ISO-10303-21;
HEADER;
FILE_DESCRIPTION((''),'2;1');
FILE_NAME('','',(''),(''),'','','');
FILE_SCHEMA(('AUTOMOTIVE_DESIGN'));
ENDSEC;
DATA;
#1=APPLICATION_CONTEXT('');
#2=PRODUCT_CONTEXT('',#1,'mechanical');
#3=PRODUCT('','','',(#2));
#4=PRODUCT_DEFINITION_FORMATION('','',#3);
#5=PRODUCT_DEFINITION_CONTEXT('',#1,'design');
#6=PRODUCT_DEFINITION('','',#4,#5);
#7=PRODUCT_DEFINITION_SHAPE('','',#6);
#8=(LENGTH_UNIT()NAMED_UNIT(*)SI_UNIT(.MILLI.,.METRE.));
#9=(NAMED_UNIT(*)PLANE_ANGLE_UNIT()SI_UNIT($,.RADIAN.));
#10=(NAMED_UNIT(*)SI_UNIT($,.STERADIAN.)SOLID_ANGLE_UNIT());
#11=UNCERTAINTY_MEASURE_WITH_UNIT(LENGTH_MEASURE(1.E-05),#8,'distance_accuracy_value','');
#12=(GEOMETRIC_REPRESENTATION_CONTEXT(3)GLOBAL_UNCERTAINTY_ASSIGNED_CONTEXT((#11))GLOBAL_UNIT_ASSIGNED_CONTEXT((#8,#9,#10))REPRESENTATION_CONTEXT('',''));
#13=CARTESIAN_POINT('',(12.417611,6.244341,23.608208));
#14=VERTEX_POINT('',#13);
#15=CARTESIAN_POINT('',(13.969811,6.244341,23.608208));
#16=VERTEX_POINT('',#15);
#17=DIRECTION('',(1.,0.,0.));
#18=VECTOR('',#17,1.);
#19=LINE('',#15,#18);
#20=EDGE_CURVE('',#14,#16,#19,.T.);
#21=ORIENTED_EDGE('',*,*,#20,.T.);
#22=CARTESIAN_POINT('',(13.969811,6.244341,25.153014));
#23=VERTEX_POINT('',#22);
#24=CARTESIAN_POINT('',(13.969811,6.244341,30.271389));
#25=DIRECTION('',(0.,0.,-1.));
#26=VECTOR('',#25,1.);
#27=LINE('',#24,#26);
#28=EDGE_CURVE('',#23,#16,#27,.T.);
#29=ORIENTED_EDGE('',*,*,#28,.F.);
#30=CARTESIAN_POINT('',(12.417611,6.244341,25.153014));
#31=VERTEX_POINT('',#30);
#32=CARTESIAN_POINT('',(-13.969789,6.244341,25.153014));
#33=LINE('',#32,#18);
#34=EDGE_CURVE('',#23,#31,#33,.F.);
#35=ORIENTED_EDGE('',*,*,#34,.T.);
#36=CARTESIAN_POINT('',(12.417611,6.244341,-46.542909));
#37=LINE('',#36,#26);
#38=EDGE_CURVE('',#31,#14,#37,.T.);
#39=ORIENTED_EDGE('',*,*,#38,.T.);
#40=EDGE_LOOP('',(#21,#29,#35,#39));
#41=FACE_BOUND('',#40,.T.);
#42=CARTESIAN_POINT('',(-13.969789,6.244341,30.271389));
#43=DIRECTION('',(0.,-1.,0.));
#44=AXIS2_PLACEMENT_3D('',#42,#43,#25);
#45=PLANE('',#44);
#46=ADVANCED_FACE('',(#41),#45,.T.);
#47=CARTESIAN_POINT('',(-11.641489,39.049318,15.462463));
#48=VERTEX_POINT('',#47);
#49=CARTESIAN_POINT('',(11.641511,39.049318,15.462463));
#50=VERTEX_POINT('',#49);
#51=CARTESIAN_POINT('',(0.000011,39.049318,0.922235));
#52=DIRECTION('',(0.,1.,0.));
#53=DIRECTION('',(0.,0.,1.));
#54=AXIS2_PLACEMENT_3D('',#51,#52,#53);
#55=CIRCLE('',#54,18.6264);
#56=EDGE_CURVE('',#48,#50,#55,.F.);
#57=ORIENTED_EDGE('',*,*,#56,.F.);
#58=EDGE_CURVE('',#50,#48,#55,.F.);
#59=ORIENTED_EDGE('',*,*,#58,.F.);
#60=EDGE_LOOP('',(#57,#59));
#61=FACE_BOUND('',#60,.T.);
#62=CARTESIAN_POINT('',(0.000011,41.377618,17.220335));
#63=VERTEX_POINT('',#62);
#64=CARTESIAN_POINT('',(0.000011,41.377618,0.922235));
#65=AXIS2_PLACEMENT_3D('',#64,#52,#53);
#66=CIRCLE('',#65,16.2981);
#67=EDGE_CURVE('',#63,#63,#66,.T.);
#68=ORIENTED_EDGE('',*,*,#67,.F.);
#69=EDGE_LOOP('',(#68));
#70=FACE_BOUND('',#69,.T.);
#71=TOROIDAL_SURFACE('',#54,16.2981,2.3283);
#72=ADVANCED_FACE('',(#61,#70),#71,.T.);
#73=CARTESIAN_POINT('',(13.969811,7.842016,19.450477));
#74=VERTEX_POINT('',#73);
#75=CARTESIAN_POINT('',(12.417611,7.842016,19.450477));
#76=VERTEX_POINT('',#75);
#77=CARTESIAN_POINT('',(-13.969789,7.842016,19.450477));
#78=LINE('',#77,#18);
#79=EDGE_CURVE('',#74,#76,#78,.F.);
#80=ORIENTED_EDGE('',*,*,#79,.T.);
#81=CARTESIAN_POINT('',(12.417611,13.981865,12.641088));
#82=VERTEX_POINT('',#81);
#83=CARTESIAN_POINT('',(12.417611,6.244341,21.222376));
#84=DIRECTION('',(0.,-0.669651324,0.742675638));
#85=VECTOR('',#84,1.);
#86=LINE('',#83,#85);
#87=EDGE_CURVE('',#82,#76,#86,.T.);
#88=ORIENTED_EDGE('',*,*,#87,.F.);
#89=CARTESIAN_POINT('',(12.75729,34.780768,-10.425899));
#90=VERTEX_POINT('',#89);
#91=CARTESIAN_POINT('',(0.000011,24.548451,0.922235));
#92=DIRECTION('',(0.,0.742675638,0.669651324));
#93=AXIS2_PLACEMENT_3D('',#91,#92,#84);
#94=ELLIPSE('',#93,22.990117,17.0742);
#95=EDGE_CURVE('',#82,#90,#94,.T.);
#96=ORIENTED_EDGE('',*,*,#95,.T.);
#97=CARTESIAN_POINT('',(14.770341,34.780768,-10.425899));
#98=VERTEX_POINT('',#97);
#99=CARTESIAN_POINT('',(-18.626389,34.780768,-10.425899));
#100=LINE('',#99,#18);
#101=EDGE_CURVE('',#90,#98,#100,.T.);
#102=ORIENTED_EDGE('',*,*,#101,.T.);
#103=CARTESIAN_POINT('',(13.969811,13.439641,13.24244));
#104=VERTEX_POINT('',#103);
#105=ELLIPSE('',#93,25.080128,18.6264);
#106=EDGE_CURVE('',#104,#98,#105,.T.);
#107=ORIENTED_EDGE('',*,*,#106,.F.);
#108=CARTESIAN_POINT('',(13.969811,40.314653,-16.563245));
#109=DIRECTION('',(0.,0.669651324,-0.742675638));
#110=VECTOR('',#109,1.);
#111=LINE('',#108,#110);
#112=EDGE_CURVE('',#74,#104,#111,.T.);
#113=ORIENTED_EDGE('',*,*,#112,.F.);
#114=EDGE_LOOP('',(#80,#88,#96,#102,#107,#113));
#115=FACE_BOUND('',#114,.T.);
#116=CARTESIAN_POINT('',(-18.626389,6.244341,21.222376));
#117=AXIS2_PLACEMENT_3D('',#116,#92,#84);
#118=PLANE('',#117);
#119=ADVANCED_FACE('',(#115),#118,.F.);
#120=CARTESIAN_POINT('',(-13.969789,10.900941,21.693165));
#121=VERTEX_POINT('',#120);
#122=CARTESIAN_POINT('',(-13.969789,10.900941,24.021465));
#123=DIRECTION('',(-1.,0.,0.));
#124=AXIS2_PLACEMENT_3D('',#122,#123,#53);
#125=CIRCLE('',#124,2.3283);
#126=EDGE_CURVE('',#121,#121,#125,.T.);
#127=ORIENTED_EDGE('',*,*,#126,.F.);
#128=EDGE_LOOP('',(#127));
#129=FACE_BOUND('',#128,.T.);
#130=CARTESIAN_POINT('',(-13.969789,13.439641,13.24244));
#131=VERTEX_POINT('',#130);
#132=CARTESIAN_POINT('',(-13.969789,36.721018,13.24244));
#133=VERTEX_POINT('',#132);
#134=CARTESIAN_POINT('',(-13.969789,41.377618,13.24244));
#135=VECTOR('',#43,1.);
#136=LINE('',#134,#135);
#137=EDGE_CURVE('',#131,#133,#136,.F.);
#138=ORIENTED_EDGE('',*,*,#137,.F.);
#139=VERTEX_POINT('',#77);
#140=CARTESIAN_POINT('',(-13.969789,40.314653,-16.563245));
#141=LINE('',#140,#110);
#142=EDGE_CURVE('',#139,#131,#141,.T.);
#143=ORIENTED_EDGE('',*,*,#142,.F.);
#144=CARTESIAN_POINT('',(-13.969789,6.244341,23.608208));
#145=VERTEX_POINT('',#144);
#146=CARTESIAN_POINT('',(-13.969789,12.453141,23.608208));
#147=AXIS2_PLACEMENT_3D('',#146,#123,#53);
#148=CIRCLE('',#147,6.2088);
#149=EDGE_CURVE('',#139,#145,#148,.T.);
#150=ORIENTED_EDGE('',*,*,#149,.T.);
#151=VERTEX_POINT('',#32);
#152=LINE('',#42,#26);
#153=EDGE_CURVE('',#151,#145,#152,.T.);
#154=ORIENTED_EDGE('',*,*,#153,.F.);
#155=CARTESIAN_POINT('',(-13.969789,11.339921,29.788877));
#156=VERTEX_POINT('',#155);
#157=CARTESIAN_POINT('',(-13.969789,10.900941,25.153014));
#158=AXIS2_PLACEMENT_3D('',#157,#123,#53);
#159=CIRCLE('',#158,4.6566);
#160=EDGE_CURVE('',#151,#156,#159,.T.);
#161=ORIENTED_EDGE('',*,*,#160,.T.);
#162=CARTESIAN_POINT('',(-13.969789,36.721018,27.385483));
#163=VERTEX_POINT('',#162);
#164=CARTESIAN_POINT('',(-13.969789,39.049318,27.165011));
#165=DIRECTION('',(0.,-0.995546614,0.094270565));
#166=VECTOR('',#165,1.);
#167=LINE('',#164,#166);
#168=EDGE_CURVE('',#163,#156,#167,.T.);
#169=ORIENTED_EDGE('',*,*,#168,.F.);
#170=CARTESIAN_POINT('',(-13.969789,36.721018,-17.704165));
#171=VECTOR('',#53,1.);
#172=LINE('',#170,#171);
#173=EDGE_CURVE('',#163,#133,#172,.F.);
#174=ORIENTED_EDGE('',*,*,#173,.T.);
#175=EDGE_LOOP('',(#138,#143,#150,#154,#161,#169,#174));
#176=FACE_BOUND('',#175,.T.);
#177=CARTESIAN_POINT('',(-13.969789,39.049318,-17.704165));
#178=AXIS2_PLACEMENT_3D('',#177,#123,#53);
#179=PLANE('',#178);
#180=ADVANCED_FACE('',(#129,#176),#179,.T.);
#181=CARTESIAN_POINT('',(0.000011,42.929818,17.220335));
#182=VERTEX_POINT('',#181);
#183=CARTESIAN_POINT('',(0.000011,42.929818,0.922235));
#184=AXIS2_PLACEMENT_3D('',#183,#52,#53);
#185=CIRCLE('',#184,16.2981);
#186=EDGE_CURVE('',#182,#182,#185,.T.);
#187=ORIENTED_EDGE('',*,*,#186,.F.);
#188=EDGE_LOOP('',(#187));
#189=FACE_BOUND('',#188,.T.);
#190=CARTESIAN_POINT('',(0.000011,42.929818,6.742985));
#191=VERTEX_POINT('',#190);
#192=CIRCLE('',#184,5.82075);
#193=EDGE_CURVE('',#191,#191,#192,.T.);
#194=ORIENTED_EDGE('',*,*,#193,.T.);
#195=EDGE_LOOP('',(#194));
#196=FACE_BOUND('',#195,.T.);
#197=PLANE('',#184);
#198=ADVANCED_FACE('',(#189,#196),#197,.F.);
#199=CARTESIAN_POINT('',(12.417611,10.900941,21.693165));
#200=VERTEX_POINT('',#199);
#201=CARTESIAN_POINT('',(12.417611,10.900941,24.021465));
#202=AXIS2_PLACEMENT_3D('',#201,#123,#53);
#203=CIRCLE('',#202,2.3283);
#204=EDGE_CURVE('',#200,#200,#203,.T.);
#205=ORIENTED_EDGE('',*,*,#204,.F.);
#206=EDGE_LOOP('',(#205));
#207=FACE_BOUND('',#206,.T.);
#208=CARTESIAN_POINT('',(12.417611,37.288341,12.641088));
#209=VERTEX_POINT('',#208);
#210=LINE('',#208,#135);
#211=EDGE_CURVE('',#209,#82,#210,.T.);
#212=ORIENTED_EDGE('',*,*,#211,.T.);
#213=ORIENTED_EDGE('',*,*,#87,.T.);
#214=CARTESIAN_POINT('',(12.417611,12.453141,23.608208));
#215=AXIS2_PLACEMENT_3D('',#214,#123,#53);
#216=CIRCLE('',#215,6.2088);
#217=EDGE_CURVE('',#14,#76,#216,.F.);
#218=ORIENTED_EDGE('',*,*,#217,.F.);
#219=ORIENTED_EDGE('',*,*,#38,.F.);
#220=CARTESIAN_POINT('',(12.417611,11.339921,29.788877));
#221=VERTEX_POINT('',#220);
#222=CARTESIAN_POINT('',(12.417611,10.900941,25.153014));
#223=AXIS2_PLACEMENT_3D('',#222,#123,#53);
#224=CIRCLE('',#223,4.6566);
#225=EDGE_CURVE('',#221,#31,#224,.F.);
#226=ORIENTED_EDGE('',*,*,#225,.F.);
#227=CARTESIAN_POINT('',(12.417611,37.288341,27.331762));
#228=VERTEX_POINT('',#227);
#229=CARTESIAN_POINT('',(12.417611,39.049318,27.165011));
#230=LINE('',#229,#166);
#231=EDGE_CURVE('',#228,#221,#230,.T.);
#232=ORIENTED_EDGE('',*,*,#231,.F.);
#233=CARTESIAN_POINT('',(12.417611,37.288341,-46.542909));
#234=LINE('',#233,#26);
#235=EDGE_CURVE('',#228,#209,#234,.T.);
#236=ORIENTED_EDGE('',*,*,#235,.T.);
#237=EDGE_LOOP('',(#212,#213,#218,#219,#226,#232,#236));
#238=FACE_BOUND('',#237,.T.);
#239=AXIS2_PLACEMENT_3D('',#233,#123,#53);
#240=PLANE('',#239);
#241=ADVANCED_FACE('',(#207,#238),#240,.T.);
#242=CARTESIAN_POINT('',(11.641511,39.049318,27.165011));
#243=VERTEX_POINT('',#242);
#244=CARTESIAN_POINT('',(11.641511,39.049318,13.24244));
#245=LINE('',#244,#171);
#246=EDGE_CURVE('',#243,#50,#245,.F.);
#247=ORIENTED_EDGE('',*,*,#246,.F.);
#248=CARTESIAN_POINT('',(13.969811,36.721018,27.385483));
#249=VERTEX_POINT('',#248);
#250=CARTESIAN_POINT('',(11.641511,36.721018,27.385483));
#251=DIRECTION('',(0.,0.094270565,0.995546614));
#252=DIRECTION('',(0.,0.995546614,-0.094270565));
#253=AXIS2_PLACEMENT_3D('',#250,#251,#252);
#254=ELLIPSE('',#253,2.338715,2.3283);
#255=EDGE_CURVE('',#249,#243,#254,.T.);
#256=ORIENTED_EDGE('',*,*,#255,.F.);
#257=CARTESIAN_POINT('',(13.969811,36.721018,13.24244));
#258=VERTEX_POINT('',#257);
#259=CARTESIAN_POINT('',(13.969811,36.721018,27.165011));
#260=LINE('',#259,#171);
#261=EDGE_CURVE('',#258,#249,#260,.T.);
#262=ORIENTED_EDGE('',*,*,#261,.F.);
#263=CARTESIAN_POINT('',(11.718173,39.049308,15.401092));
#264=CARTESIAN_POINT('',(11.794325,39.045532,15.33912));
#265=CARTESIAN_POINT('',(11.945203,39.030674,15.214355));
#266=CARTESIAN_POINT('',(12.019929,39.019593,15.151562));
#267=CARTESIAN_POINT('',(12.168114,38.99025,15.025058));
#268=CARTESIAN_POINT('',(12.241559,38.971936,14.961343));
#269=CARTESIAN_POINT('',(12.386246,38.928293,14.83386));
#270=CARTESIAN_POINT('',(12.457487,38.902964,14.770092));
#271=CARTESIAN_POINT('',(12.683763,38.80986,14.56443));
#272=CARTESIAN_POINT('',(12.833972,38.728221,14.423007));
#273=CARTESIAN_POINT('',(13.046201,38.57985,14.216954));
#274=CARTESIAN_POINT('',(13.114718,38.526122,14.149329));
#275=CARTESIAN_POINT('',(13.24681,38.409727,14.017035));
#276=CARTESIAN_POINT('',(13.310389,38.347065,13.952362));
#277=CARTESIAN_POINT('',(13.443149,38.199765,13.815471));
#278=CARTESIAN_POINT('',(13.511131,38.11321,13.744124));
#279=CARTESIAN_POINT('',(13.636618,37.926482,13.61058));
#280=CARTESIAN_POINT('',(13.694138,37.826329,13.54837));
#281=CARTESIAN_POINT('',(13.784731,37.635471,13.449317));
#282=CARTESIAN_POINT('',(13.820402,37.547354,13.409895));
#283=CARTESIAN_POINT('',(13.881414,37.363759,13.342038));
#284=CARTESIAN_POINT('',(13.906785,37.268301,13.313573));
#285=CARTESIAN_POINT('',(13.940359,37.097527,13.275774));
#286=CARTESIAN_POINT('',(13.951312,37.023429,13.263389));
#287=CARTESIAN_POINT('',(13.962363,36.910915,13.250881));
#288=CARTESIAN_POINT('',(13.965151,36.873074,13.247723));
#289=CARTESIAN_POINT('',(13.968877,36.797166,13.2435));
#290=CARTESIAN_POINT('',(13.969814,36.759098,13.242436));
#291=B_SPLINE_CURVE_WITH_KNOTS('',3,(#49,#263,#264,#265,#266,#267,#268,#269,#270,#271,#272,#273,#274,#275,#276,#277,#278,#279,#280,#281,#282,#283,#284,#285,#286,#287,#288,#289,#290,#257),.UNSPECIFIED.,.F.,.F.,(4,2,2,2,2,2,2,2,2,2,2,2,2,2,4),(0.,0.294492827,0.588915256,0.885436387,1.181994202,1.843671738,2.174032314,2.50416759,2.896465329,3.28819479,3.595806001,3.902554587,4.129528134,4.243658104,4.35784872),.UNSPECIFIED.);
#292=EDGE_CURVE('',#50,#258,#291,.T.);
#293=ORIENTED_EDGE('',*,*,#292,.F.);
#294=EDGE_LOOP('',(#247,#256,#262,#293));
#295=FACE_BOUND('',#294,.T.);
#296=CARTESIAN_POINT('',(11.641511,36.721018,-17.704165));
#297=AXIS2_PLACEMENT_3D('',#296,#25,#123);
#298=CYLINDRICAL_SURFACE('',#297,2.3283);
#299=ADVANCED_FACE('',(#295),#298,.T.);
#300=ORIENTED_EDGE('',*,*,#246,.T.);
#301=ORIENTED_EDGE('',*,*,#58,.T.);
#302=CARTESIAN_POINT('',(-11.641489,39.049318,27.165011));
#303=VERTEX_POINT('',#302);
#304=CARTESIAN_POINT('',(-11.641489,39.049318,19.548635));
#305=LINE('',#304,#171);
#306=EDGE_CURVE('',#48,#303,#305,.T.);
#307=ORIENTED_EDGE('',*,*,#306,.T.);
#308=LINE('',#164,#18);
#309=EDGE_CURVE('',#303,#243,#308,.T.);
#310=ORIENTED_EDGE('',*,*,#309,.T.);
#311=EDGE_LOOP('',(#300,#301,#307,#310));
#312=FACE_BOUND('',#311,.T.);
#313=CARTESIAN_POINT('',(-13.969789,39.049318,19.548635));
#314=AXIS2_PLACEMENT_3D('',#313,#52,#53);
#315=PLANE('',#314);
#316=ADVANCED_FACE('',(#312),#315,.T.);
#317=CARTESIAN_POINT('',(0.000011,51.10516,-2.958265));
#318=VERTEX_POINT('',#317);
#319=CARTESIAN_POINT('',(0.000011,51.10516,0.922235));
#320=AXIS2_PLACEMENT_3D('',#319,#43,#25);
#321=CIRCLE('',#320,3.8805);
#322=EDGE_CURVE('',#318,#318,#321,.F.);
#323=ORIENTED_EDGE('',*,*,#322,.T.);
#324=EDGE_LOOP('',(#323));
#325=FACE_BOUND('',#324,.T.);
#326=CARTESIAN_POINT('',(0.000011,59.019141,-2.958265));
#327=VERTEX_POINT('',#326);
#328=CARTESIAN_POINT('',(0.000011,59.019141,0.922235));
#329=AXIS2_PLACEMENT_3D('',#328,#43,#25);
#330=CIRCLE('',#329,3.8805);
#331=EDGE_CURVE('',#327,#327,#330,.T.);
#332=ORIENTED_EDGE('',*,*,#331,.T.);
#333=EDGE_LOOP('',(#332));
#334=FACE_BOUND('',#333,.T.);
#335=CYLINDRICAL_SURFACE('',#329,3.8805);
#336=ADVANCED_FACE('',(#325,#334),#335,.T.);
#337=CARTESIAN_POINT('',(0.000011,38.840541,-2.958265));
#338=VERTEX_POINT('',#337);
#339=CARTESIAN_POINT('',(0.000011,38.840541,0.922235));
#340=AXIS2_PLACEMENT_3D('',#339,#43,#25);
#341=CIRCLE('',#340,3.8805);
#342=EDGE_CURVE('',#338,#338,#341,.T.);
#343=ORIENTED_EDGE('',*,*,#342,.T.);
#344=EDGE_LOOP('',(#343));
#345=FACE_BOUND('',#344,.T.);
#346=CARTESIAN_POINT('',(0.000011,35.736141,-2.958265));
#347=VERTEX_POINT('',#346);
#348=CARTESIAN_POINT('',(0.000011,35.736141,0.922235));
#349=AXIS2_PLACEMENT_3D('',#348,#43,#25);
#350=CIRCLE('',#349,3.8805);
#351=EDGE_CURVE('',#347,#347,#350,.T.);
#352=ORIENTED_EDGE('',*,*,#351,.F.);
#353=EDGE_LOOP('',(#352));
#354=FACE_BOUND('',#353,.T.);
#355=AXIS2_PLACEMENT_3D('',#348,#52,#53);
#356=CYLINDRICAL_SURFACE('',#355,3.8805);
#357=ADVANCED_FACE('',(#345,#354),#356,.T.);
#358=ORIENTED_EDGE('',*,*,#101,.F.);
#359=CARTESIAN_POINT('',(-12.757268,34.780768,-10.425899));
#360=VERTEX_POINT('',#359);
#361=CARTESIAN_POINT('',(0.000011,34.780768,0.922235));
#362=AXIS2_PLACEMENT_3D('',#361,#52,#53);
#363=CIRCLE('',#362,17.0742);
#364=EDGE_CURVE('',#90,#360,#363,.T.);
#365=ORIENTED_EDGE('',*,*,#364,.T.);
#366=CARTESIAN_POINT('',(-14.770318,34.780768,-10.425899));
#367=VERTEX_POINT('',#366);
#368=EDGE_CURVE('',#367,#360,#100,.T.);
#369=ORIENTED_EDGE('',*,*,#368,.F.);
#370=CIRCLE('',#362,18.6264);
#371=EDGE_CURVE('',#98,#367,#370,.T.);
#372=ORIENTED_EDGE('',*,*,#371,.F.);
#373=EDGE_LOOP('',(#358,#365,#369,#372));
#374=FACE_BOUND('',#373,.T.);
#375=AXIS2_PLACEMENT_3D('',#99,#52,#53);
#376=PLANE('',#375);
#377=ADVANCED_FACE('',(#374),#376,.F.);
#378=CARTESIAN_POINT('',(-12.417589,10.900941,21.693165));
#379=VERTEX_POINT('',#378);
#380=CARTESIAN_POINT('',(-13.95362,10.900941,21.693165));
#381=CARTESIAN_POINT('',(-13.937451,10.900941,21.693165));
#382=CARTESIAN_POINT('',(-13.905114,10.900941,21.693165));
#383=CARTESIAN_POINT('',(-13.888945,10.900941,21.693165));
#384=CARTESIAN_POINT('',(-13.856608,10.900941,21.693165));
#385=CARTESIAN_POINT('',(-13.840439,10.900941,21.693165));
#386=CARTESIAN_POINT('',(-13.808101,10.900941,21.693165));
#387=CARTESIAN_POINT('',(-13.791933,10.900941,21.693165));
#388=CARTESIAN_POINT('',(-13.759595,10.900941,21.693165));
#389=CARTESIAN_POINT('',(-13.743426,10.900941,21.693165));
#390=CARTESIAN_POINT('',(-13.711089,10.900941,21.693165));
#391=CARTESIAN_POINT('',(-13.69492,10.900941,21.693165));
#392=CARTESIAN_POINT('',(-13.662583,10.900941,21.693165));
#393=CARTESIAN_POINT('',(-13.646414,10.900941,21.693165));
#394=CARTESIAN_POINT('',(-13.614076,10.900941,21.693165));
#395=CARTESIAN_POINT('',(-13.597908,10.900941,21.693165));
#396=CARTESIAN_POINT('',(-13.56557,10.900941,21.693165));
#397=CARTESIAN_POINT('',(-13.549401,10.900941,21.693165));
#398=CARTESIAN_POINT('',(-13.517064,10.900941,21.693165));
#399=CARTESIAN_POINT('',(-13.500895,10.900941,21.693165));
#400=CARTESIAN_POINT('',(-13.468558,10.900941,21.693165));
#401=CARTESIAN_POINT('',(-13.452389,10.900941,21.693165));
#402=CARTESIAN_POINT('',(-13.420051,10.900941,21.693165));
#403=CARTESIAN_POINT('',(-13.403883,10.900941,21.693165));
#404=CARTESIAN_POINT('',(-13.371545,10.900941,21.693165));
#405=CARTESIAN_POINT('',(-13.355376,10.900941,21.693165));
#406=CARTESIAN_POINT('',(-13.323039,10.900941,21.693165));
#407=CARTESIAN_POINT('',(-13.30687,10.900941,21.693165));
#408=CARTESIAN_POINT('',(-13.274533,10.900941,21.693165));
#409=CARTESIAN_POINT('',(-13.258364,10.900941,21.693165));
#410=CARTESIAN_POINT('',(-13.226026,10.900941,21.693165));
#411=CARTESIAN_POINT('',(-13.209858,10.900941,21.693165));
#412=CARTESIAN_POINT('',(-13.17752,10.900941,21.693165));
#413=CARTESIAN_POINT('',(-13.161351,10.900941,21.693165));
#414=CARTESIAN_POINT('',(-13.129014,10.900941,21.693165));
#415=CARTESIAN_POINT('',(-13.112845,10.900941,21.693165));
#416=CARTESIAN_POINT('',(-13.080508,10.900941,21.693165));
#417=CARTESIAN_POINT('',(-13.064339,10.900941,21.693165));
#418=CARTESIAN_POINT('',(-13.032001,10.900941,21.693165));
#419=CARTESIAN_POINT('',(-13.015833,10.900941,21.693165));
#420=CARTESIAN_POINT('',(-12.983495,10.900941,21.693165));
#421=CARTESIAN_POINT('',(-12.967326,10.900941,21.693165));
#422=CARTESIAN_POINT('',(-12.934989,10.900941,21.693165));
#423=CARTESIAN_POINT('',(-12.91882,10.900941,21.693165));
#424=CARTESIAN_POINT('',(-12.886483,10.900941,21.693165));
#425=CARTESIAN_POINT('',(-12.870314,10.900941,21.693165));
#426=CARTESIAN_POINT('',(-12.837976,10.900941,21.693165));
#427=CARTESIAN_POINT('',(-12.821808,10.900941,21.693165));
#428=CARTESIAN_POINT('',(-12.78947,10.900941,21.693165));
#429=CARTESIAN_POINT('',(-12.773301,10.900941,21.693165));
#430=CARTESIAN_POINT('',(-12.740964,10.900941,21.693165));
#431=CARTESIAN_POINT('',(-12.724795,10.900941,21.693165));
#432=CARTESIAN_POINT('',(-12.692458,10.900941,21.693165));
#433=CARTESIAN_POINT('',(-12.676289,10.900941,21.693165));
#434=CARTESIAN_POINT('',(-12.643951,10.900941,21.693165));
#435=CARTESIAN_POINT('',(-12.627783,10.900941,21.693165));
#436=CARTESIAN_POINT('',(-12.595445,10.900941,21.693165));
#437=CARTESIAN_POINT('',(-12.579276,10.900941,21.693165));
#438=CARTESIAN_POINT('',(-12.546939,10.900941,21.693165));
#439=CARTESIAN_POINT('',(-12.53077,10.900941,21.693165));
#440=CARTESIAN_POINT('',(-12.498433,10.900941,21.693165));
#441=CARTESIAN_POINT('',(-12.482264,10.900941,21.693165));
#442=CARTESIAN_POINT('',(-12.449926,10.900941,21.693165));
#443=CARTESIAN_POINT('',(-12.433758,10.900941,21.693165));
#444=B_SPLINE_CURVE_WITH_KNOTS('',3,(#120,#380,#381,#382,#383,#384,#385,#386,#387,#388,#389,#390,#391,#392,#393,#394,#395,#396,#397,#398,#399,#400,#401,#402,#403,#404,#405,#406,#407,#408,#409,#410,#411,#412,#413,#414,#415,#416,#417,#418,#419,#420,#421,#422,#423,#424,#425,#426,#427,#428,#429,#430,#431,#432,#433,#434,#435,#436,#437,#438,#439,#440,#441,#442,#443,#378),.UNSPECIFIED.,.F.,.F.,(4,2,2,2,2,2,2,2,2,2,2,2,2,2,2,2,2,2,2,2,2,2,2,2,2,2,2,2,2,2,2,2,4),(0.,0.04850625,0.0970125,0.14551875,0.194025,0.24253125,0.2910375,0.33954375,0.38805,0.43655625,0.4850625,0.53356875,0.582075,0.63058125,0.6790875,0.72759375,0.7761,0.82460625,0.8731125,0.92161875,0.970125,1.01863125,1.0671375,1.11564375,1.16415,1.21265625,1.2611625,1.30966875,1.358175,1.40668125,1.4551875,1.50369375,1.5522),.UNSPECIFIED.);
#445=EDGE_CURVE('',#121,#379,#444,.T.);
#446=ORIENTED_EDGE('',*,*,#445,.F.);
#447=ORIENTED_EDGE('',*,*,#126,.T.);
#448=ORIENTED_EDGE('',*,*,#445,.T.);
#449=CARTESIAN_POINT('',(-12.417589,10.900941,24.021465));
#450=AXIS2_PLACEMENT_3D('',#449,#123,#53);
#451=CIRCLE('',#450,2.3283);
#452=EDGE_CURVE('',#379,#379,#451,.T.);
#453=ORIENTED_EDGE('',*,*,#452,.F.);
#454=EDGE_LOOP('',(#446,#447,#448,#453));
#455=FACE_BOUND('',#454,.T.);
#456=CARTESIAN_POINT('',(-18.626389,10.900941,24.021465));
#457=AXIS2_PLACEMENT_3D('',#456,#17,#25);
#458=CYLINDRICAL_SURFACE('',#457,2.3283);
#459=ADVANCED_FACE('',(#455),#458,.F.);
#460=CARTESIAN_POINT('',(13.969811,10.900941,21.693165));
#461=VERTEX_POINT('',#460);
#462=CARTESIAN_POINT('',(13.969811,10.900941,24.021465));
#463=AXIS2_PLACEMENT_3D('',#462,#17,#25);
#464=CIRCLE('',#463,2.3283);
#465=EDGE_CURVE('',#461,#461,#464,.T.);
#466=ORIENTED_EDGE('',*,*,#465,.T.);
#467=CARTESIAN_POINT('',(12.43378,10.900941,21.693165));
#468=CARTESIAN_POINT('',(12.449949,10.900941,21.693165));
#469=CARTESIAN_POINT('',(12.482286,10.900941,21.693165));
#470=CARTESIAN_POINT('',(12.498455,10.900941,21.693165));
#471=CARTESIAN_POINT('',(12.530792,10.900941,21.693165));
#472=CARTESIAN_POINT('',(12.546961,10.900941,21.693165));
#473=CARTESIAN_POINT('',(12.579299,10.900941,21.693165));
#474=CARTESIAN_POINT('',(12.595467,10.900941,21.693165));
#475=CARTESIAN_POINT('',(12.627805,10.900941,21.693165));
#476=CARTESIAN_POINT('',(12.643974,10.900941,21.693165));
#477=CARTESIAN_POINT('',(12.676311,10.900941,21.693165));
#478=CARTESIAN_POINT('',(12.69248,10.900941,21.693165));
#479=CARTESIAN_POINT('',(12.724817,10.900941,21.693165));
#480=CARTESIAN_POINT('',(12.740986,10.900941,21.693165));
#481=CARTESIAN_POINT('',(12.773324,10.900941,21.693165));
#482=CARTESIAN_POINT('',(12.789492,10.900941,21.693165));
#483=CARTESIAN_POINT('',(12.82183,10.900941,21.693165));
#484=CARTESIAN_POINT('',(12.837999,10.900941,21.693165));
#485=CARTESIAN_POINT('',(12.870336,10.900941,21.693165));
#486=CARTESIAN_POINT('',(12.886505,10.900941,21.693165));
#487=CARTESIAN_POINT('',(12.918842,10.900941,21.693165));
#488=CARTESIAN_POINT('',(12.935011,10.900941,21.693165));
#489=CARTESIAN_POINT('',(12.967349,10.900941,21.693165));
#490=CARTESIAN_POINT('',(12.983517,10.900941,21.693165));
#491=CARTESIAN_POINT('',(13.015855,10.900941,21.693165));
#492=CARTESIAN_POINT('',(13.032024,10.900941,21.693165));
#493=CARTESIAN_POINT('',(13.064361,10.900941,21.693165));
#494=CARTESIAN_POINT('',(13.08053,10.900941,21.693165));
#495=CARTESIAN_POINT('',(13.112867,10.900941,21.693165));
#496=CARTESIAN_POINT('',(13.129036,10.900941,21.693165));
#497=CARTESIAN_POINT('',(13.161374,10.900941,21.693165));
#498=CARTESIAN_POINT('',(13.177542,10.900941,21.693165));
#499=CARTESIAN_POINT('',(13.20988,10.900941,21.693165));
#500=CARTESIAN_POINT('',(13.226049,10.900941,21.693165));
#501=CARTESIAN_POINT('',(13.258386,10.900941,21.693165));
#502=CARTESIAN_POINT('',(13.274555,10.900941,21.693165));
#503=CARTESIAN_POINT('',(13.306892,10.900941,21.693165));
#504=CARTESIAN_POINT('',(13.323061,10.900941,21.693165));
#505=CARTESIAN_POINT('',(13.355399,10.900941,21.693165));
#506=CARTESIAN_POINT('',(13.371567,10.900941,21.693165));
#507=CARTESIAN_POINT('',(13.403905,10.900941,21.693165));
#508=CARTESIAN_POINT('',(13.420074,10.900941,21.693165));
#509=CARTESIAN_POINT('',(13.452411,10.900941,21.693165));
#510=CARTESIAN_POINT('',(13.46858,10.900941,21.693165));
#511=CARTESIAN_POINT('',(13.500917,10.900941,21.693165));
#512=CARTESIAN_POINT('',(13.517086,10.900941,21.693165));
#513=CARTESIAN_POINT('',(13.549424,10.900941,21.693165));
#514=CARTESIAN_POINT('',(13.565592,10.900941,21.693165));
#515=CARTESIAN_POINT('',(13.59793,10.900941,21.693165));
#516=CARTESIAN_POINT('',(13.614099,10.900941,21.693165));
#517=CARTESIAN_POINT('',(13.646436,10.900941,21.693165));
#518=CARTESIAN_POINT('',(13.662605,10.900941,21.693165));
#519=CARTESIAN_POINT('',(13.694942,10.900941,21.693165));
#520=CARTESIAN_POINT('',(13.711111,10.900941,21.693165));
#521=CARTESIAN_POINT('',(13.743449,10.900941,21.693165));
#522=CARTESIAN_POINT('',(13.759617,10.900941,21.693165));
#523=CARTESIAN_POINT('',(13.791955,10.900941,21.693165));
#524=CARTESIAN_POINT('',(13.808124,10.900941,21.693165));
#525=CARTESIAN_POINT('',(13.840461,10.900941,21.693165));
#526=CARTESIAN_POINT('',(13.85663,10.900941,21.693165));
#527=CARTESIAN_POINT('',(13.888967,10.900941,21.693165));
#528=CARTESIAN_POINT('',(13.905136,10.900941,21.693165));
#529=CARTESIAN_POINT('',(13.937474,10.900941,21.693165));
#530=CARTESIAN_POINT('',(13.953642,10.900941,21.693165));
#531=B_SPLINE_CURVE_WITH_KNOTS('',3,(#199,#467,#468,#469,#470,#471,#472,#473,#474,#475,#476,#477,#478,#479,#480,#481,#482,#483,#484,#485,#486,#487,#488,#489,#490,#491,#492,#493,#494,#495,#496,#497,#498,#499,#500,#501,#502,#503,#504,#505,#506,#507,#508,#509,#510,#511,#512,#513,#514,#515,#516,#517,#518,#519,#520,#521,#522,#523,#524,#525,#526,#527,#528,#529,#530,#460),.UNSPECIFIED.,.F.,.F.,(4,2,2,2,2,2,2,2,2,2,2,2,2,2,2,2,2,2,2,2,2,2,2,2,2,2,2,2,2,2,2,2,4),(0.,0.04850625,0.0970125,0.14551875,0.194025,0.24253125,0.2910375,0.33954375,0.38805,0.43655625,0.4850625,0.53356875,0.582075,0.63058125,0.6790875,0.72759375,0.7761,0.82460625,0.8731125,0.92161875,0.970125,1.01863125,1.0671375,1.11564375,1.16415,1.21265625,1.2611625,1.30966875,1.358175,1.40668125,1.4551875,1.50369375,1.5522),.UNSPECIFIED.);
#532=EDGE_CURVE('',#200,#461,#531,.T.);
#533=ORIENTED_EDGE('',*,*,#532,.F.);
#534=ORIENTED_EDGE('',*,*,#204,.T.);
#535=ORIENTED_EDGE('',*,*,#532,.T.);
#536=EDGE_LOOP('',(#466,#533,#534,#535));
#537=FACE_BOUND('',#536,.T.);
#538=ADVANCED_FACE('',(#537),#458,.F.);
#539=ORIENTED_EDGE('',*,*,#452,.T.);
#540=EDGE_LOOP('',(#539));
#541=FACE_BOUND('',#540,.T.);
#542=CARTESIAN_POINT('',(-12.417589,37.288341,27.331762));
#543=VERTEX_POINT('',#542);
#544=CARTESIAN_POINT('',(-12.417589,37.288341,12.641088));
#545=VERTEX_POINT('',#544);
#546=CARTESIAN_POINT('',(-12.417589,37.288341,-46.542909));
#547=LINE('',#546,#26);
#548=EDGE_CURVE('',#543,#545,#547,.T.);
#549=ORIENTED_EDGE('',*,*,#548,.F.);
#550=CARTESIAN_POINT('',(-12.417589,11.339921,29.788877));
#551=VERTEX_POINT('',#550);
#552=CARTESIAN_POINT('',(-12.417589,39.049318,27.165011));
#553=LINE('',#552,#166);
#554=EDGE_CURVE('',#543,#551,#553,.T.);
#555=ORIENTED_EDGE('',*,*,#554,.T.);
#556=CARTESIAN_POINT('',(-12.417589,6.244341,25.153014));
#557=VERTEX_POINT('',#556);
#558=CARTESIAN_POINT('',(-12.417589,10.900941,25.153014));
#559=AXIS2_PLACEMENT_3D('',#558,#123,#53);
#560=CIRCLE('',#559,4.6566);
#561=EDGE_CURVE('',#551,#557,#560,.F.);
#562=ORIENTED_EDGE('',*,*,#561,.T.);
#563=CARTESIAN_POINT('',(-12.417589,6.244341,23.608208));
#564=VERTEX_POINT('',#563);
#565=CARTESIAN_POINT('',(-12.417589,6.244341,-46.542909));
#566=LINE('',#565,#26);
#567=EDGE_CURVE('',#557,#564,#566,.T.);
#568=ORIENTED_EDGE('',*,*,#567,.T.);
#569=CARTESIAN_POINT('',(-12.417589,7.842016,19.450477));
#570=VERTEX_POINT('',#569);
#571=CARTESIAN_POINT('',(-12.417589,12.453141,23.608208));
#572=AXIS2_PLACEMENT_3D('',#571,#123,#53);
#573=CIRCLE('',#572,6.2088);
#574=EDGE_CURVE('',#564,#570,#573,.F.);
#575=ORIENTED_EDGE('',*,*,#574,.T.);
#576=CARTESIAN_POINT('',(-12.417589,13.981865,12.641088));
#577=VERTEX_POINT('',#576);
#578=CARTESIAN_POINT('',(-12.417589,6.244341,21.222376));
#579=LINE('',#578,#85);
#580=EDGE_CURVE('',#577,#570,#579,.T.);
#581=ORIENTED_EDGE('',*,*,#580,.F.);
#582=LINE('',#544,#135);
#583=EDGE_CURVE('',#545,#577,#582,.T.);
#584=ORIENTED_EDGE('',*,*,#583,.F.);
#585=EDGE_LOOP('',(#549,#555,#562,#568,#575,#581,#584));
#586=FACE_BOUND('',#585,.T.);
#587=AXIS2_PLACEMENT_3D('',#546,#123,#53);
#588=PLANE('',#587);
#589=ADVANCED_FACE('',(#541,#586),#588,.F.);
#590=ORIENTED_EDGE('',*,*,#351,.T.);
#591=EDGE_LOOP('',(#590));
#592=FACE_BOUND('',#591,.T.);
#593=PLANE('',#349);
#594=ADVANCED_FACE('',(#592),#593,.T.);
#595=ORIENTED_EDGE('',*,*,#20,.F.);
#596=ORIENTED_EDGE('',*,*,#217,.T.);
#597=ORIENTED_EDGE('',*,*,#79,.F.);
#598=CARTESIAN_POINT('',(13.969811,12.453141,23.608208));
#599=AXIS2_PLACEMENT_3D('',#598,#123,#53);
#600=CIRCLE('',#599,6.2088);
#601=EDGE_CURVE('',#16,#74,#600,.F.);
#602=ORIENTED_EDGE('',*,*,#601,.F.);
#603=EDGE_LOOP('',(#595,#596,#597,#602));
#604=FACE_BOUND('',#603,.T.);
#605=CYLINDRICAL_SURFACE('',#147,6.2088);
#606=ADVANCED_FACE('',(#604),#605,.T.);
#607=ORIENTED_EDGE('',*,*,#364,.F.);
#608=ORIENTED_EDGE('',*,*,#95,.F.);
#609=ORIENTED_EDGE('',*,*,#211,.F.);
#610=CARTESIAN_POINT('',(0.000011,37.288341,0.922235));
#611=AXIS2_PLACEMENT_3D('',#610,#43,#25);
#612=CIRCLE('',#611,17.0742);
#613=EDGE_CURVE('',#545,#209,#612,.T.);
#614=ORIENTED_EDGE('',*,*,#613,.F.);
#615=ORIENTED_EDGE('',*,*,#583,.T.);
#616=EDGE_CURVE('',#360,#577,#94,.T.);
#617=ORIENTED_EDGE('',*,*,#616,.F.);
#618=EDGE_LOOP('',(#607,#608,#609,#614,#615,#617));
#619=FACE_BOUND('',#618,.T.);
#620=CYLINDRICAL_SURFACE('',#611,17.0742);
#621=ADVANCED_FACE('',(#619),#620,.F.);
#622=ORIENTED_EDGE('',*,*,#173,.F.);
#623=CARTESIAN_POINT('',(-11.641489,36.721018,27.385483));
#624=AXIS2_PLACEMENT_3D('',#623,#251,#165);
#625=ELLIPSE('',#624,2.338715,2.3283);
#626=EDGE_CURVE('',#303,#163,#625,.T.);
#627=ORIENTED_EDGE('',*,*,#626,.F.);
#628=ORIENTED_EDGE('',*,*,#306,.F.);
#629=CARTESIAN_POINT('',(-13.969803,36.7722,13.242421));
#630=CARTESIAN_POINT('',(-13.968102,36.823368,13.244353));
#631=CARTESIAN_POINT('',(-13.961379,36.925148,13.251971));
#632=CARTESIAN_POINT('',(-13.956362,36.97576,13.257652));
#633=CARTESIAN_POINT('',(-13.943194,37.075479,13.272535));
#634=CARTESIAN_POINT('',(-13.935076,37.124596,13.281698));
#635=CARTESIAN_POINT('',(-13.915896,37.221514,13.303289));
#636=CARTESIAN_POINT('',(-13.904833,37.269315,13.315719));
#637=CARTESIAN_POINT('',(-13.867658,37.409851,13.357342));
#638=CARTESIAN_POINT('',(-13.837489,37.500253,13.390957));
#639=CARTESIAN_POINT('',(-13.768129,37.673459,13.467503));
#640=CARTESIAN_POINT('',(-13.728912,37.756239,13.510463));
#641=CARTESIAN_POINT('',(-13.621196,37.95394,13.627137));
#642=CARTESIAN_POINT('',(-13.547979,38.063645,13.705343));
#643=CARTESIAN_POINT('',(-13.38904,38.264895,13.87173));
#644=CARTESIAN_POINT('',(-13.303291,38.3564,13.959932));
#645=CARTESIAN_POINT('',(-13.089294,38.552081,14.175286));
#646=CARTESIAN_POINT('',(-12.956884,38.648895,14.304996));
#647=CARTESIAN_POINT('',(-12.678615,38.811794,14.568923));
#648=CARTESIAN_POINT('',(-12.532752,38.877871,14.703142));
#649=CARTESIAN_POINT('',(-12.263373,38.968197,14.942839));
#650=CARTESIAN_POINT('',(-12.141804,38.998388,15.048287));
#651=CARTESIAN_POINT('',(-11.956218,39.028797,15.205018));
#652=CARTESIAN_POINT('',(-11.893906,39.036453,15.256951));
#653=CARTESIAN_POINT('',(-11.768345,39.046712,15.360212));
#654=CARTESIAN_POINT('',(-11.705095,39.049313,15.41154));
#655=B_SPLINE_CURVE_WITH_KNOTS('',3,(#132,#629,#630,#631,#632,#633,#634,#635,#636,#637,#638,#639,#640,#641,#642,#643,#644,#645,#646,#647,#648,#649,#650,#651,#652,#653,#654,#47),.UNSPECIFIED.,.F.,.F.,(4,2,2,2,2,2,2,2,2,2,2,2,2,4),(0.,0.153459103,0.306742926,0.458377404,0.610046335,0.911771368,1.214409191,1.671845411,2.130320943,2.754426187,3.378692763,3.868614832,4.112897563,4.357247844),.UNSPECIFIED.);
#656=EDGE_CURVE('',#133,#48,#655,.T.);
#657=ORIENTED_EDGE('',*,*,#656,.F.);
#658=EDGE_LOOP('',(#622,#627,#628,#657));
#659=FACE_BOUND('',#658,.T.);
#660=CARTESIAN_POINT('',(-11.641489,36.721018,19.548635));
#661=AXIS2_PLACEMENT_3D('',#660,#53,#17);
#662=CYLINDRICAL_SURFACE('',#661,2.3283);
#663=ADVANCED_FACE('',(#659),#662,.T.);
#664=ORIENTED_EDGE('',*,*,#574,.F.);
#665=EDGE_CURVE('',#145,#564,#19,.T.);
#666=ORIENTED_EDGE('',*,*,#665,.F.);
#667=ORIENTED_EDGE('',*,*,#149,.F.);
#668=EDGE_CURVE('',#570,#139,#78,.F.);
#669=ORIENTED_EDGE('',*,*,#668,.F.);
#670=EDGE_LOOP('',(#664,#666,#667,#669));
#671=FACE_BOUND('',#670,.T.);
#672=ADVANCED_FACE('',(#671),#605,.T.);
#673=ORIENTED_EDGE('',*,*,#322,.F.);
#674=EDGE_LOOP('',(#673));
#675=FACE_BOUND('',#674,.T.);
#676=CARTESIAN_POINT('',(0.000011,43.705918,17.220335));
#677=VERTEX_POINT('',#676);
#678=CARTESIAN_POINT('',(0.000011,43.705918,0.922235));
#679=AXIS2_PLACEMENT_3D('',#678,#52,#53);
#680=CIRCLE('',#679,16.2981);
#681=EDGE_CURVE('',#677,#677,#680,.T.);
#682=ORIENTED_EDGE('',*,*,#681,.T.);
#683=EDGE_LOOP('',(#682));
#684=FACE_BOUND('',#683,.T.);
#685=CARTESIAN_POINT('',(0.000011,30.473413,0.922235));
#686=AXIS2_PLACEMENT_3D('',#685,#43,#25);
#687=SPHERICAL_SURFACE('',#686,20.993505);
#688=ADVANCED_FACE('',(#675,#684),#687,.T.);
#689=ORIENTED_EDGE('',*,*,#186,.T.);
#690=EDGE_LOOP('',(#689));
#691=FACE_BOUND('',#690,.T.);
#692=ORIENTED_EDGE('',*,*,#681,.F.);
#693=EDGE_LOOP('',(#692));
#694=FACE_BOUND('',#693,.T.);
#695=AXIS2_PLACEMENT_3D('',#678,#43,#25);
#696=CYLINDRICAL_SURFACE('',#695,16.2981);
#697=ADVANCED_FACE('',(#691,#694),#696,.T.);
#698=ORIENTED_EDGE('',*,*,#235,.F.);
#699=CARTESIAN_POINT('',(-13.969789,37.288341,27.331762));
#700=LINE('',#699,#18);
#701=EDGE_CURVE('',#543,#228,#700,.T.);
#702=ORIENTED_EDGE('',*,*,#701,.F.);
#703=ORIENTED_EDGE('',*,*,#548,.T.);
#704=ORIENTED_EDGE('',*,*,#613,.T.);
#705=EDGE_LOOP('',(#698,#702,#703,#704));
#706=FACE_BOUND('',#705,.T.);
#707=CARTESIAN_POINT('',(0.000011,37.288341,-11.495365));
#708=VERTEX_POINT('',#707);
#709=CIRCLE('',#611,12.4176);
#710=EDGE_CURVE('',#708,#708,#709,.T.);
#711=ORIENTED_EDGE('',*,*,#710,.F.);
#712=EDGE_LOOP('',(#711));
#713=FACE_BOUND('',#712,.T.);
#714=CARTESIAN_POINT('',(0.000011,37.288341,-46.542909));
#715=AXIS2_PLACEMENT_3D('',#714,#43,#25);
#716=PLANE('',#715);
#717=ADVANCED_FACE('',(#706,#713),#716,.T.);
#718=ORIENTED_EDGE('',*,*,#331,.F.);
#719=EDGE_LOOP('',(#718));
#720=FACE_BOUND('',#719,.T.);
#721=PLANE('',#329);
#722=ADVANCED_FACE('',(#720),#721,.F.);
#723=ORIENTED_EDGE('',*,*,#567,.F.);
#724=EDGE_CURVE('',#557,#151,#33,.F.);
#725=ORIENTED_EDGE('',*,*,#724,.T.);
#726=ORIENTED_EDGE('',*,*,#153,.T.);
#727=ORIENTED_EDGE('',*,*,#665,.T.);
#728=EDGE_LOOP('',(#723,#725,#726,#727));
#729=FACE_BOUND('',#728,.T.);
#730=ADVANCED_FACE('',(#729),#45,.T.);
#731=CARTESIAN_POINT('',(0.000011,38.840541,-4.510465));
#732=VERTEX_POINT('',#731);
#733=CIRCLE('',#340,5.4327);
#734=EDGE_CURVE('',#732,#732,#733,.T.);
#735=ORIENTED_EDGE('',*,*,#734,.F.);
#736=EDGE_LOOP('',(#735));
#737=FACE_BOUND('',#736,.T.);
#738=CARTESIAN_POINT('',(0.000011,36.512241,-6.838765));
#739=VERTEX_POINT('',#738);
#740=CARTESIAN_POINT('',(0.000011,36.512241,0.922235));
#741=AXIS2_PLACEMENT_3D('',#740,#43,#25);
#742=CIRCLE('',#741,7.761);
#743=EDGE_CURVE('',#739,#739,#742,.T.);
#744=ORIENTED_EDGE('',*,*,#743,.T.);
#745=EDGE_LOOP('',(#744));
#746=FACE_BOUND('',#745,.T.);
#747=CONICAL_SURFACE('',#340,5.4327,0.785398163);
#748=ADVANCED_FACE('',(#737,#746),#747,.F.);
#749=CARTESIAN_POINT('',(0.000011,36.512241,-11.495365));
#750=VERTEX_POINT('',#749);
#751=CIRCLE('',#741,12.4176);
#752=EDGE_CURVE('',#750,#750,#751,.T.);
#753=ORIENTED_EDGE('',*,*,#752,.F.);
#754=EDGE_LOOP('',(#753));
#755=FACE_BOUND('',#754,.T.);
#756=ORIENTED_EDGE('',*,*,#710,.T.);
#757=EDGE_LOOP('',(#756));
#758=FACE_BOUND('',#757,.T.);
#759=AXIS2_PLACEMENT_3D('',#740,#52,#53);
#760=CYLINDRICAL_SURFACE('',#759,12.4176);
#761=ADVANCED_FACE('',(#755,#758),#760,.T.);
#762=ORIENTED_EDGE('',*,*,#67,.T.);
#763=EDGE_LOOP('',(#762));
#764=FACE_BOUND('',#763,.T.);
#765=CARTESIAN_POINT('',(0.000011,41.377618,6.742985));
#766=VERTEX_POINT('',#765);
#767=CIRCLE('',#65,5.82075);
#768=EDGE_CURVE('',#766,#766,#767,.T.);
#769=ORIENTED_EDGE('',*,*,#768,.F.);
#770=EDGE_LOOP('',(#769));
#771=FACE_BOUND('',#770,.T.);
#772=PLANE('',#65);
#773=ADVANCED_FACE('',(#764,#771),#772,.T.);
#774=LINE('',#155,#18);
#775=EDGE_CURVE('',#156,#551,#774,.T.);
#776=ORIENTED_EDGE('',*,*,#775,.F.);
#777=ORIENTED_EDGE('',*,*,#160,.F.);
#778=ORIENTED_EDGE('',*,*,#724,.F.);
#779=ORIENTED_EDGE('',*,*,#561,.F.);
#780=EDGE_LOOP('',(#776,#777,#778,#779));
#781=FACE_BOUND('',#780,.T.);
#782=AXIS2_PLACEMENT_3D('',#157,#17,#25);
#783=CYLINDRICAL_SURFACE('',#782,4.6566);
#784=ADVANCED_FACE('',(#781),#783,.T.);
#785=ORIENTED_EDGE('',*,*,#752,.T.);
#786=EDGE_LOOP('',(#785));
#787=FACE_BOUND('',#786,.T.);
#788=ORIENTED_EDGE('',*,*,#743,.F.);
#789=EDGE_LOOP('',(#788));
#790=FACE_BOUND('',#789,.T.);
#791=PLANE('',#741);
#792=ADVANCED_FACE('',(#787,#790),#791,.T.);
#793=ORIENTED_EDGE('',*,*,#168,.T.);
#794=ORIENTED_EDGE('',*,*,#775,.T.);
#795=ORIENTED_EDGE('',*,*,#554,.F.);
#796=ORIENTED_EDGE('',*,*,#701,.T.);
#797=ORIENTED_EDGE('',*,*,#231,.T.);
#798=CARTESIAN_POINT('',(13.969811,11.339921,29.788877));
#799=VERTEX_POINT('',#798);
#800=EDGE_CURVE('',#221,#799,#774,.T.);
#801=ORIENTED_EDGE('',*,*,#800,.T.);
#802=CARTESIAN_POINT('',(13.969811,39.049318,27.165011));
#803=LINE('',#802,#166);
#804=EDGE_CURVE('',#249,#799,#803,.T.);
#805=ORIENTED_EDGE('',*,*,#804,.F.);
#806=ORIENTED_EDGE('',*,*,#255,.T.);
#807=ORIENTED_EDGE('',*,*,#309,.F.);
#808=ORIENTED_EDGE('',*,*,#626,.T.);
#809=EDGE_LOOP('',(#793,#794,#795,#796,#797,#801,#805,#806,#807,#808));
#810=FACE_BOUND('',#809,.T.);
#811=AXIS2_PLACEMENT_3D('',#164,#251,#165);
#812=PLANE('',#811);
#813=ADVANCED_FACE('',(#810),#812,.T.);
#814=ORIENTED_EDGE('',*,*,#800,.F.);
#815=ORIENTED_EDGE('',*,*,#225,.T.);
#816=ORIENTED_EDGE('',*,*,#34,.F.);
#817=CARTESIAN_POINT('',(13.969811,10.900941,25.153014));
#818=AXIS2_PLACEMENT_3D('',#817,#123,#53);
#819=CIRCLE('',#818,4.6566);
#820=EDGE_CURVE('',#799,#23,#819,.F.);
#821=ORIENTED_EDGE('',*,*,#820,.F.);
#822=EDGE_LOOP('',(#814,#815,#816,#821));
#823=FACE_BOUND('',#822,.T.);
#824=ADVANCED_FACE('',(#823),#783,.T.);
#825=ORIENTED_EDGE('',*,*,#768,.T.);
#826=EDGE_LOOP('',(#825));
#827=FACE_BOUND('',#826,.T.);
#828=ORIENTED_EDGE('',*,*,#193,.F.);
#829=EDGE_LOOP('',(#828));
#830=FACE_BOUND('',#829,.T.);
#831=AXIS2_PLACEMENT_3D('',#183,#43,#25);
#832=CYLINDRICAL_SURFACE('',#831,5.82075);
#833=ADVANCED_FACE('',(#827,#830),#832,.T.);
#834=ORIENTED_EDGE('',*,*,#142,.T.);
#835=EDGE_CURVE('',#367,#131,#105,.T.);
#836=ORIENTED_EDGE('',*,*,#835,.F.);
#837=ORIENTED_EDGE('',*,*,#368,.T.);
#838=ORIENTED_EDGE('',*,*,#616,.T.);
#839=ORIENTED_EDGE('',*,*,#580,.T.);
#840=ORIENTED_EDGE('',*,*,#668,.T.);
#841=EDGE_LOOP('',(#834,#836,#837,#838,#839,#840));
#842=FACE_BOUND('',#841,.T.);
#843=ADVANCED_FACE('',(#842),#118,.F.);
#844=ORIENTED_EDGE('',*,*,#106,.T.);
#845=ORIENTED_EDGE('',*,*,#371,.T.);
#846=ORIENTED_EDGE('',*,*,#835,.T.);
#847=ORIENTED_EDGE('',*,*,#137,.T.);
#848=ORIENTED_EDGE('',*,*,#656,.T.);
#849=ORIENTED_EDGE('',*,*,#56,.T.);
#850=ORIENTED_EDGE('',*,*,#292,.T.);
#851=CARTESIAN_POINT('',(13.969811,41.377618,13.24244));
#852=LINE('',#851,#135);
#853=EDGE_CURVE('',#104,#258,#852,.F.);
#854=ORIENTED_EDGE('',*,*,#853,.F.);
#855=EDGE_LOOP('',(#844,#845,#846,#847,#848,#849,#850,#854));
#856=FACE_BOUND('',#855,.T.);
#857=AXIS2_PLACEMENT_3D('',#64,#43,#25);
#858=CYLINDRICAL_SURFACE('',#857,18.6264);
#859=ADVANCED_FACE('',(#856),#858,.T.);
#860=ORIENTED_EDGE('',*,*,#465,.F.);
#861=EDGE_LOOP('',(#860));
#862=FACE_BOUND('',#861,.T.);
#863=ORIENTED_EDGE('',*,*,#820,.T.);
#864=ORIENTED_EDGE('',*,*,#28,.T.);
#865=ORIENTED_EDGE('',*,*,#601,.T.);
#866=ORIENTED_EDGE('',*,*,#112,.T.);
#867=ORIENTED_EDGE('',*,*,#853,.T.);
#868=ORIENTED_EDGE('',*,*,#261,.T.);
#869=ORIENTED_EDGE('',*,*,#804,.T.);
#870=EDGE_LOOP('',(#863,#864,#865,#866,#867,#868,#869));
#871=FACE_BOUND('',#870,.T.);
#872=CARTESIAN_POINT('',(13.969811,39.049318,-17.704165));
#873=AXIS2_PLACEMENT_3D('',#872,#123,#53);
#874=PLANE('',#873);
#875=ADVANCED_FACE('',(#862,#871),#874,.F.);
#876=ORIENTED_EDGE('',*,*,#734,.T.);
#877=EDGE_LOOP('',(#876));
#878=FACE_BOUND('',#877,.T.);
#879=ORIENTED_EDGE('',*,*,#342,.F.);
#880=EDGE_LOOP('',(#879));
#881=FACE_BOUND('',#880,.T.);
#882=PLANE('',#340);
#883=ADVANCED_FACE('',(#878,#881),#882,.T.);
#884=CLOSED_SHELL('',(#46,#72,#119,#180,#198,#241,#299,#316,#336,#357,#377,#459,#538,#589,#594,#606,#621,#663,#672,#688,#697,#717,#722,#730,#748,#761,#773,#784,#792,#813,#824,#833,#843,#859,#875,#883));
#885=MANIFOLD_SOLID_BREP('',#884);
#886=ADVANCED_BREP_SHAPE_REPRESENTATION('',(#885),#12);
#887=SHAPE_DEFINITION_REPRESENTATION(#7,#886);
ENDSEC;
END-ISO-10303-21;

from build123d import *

# Parameters (mm, degrees)
SKETCH1_R                = 24
BOSS_EXTRUDE1_DEPTH      = 42
FILLET1_R                = 3
BOSS_EXTRUDE2_DEPTH      = 18
BOSS_EXTRUDE2_DEPTH_BACK = 18
CUT_EXTRUDE2_DEPTH       = 42
CUT_EXTRUDE3_DEPTH       = 62.400856059
CUT_EXTRUDE3_DEPTH_BACK  = 62.400856059
FILLET2_R                = 6
FILLET3_R                = 8
FILLET4_R                = 3
SKETCH6_W                = 32
SKETCH6_H                = 1.990473873
SKETCH6_H_2              = 40.942974084
CUT_EXTRUDE5_DEPTH       = 40
SKETCH7_R                = 16
BOSS_EXTRUDE3_DEPTH      = 1
SKETCH8_R                = 10
CUT_EXTRUDE6_DEPTH       = 3
CHAMFER1_SIZE            = 3
SKETCH9_R                = 5
BOSS_EXTRUDE4_DEPTH      = 4
CHAMFER2_SIZE            = 1
SKETCH10_R               = 3
CUT_EXTRUDE7_DEPTH       = 71.095779947
SKETCH11_R               = 7.5
BOSS_EXTRUDE5_DEPTH      = 2
SKETCH12_R               = 21
BOSS_EXTRUDE6_DEPTH      = 1
DOME1_FACE_RADIUS        = 21
DOME1_HEIGHT             = 10
BOSS_EXTRUDE7_START      = -30
SKETCH13_R               = 5
BOSS_EXTRUDE7_DEPTH      = 30
SCALE1_SCALE             = 0.7761


# Some blends are built 0.0001 mm under size
with BuildPart() as part:
    # Sketch1 → Boss-Extrude1 (new body)
    with BuildSketch(Plane(origin=(0, 0, 0), x_dir=(1, 0, 0), z_dir=(0, 1, 0))):
        with Locations(Location((0, 0, 0), (0, 0, 90))):
            Circle(SKETCH1_R)
    extrude(amount=BOSS_EXTRUDE1_DEPTH)

    # Fillet1
    fillet1_edges = [part.edges().sort_by_distance(p)[0] for p in [
        (0, 42, 24),
    ]]
    fillet(fillet1_edges, radius=FILLET1_R)

    # Sketch2 → Boss-Extrude2 (add, two sides: drawn at the far end of the back side and taken through both)
    with BuildSketch(Plane(origin=(0, 0, 0), x_dir=(0, 0, -1), z_dir=(1, 0, 0)).offset(-BOSS_EXTRUDE2_DEPTH_BACK)):
        Polygon((-24, 39), (-33.81365361, 39), (-37.816201771, -3.269008091), (-26.156604955, -3.269008091), (15.957162651, 34.668187521), (24, 34.668187521), (24, 39), align=None)
    extrude(amount=BOSS_EXTRUDE2_DEPTH + BOSS_EXTRUDE2_DEPTH_BACK)

    # Sketch4 → Cut-Extrude2 (cut)
    with BuildSketch(Plane.XZ):
        with BuildLine():
            Line((23.002581612, -9.203628547), (22.165135271, -9.203628547))
            ThreePointArc((22.165135271, -9.203628547), (0, -24), (-22.165135271, -9.203628547))
            Line((-22.165135271, -9.203628547), (-22.165135271, -25.095490922))
            Line((-22.165135271, -25.095490922), (23.002581612, -25.095490922))
            Line((23.002581612, -25.095490922), (23.002581612, -9.203628547))
        make_face()
    extrude(amount=-CUT_EXTRUDE2_DEPTH, mode=Mode.SUBTRACT)

    # Sketch5 → Cut-Extrude3 (cut, two sides: drawn at the far end of the back side and taken through both)
    with BuildSketch(Plane(origin=(0, 0, 0), x_dir=(0, 0, -1), z_dir=(1, 0, 0)).offset(-CUT_EXTRUDE3_DEPTH_BACK)):
        Polygon((-26.156604955, -3.269008091), (14.621999629, 33.5), (25.781931598, 33.5), (25.781931598, -3.269008091), align=None)
    extrude(amount=CUT_EXTRUDE3_DEPTH + CUT_EXTRUDE3_DEPTH_BACK, mode=Mode.SUBTRACT)

    # Fillet2
    fillet2_edges = [part.edges().sort_by_distance(p)[0] for p in [
        (0, -3.269008091, 37.816201771),
    ]]
    fillet(fillet2_edges, radius=FILLET2_R)

    # Fillet3
    fillet3_edges = [part.edges().sort_by_distance(p)[0] for p in [
        (0, -3.269008091, 26.156604955),
    ]]
    fillet(fillet3_edges, radius=FILLET3_R)

    # Fillet4
    # the kernel refuses this fillet: 3 mm, written as the material it takes off along each edge
    with BuildSketch(Plane(origin=(18, 39, 41.31365361), x_dir=(-1, 0, 0), z_dir=(0, 0, -1))) as fillet4_piece_1_section:
        with BuildLine():
            CenterArc((FILLET4_R, -FILLET4_R), FILLET4_R, 90, 90)
            Line((0, -FILLET4_R), (0, 0))
            Line((0, 0), (FILLET4_R, 0))
        make_face()
    fillet4_piece_1 = extrude(amount=32.939145744, mode=Mode.PRIVATE)
    fillet4_piece_1 = fillet4_piece_1 - Plane(origin=(0, 38.317129028, 0), x_dir=(0, 0, -1), z_dir=(0, -1, 0)) * Cylinder(24, 78, mode=Mode.PRIVATE)
    add(fillet4_piece_1, mode=Mode.SUBTRACT)
    with BuildSketch(Plane(origin=(-18, 39, 8.374507866), x_dir=(0, -1, 0), z_dir=(0, 0, 1))) as fillet4_piece_2_section:
        with BuildLine():
            CenterArc((FILLET4_R, FILLET4_R), FILLET4_R, 180, 90)
            Line((0, FILLET4_R), (0, 0))
            Line((0, 0), (FILLET4_R, 0))
        make_face()
    fillet4_piece_2 = extrude(amount=32.939145744, mode=Mode.PRIVATE)
    fillet4_piece_2 = fillet4_piece_2 - Plane(origin=(0, 38.317126887, 0), x_dir=(0, 0, -1), z_dir=(0, -1, 0)) * Cylinder(24, 78, mode=Mode.PRIVATE)
    add(fillet4_piece_2, mode=Mode.SUBTRACT)

    # Sketch6 → Cut-Extrude5 (cut)
    with BuildSketch(Plane.XZ.offset(3.269008091)):
        with BuildLine():
            ThreePointArc((16, 15.099668871), (0, 22), (-16, 15.099668871))
            Line((-16, 15.099668871), (-16, 2.278234246))
            Line((-16, 2.278234246), (16, 2.278234246))
            Line((16, 2.278234246), (16, 15.099668871))
        make_face()
        with BuildLine():
            Line((-16, 2.278234246), (-16, 15.099668871))
            ThreePointArc((-16, 15.099668871), (-8.124038405, -20.4450483), (22, 0))
            ThreePointArc((22, 0), (20.4450483, 8.124038405), (16, 15.099668871))
            Line((16, 15.099668871), (16, 2.278234246))
            Line((16, 2.278234246), (-16, 2.278234246))
        make_face()
        with Locations((0, 30.225971395)):
            Rectangle(SKETCH6_W, SKETCH6_H)
        with Locations((0, 51.692695373)):
            Rectangle(SKETCH6_W, SKETCH6_H_2)
        with BuildLine():
            Line((16, 29.230734458), (-16, 29.230734458))
            Line((-16, 29.230734458), (-16, 15.099668871))
            ThreePointArc((-16, 15.099668871), (0, 22), (16, 15.099668871))
            Line((16, 15.099668871), (16, 29.230734458))
        make_face()
    extrude(amount=-CUT_EXTRUDE5_DEPTH, mode=Mode.SUBTRACT)

    # Sketch7 → Boss-Extrude3 (add)
    with BuildSketch(Plane.XZ.offset(-36.730991909)):
        with Locations(Location((0, 0, 0), (0, 0, 270))):
            Circle(SKETCH7_R)
    extrude(amount=BOSS_EXTRUDE3_DEPTH)

    # Sketch8 → Cut-Extrude6 (cut)
    with BuildSketch(Plane.XZ.offset(-35.730991909)):
        with Locations(Location((0, 0, 0), (0, 0, 270))):
            Circle(SKETCH8_R)
    extrude(amount=-CUT_EXTRUDE6_DEPTH, mode=Mode.SUBTRACT)

    # Chamfer1
    chamfer1_edges = [part.edges().sort_by_distance(p)[0] for p in [
        (0, 38.730991909, 10),
    ]]
    chamfer(chamfer1_edges, length=CHAMFER1_SIZE - 0.0001)  # a hair under: the kernel refuses the full size

    # Sketch9 → Boss-Extrude4 (add)
    with BuildSketch(Plane.XZ.offset(-38.730991909)):
        with Locations(Location((0, 0, 0), (0, 0, 270))):
            Circle(SKETCH9_R)
    extrude(amount=BOSS_EXTRUDE4_DEPTH)

    # Chamfer2
    chamfer2_edges = [part.edges().sort_by_distance(p)[0] for p in [
        (0, 34.730991909, 5),
    ]]
    chamfer(chamfer2_edges, length=CHAMFER2_SIZE)

    # Sketch10 → Cut-Extrude7 (cut, through all)
    with BuildSketch(Plane(origin=(18, 0, 0), x_dir=(0, 0, -1), z_dir=(1, 0, 0))):
        with Locations((-29.763213514, 2.730991909)):
            Circle(SKETCH10_R)
    extrude(amount=-CUT_EXTRUDE7_DEPTH, mode=Mode.SUBTRACT)

    # Sketch11 → Boss-Extrude5 (add)
    with BuildSketch(Plane(origin=(0, 42, 0), x_dir=(1, 0, 0), z_dir=(0, 1, 0))):
        with Locations(Location((0, 0, 0), (0, 0, 270))):
            Circle(SKETCH11_R)
    extrude(amount=BOSS_EXTRUDE5_DEPTH)

    # Sketch12 → Boss-Extrude6 (add)
    with BuildSketch(Plane(origin=(0, 44, 0), x_dir=(1, 0, 0), z_dir=(0, 1, 0))):
        with Locations(Location((0, 0, 0), (0, 0, 270))):
            Circle(SKETCH12_R)
    extrude(amount=BOSS_EXTRUDE6_DEPTH)

    # Dome1: a dome of height H over a round flat face of radius A is a cap of a sphere of radius (A * A + H * H) / (2 * H)
    dome1_r = (DOME1_FACE_RADIUS * DOME1_FACE_RADIUS + DOME1_HEIGHT * DOME1_HEIGHT) / (2 * DOME1_HEIGHT)
    dome1_base = Plane((0, 45, 0), z_dir=(0, 1, 0))
    with Locations(dome1_base.offset(DOME1_HEIGHT - dome1_r)):
        dome1_ball = Sphere(dome1_r, mode=Mode.PRIVATE)
    add(split(dome1_ball, bisect_by=dome1_base, keep=Keep.TOP, mode=Mode.PRIVATE))

    # Sketch13 → Boss-Extrude7 (add)
    with BuildSketch(Plane.XZ.offset(-34.730991909).offset(BOSS_EXTRUDE7_START)):
        with Locations(Location((0, 0, 0), (0, 0, 270))):
            Circle(SKETCH13_R)
    extrude(amount=BOSS_EXTRUDE7_DEPTH)


with BuildPart() as part_1:
    # Scale1: scaled about (-4.3e-08, 39.220241586, 4.118564184)
    add(part.part.scale(SCALE1_SCALE).moved(Location((-1e-08, 8.781412091, 0.922146521))))


solid = part_1.part
